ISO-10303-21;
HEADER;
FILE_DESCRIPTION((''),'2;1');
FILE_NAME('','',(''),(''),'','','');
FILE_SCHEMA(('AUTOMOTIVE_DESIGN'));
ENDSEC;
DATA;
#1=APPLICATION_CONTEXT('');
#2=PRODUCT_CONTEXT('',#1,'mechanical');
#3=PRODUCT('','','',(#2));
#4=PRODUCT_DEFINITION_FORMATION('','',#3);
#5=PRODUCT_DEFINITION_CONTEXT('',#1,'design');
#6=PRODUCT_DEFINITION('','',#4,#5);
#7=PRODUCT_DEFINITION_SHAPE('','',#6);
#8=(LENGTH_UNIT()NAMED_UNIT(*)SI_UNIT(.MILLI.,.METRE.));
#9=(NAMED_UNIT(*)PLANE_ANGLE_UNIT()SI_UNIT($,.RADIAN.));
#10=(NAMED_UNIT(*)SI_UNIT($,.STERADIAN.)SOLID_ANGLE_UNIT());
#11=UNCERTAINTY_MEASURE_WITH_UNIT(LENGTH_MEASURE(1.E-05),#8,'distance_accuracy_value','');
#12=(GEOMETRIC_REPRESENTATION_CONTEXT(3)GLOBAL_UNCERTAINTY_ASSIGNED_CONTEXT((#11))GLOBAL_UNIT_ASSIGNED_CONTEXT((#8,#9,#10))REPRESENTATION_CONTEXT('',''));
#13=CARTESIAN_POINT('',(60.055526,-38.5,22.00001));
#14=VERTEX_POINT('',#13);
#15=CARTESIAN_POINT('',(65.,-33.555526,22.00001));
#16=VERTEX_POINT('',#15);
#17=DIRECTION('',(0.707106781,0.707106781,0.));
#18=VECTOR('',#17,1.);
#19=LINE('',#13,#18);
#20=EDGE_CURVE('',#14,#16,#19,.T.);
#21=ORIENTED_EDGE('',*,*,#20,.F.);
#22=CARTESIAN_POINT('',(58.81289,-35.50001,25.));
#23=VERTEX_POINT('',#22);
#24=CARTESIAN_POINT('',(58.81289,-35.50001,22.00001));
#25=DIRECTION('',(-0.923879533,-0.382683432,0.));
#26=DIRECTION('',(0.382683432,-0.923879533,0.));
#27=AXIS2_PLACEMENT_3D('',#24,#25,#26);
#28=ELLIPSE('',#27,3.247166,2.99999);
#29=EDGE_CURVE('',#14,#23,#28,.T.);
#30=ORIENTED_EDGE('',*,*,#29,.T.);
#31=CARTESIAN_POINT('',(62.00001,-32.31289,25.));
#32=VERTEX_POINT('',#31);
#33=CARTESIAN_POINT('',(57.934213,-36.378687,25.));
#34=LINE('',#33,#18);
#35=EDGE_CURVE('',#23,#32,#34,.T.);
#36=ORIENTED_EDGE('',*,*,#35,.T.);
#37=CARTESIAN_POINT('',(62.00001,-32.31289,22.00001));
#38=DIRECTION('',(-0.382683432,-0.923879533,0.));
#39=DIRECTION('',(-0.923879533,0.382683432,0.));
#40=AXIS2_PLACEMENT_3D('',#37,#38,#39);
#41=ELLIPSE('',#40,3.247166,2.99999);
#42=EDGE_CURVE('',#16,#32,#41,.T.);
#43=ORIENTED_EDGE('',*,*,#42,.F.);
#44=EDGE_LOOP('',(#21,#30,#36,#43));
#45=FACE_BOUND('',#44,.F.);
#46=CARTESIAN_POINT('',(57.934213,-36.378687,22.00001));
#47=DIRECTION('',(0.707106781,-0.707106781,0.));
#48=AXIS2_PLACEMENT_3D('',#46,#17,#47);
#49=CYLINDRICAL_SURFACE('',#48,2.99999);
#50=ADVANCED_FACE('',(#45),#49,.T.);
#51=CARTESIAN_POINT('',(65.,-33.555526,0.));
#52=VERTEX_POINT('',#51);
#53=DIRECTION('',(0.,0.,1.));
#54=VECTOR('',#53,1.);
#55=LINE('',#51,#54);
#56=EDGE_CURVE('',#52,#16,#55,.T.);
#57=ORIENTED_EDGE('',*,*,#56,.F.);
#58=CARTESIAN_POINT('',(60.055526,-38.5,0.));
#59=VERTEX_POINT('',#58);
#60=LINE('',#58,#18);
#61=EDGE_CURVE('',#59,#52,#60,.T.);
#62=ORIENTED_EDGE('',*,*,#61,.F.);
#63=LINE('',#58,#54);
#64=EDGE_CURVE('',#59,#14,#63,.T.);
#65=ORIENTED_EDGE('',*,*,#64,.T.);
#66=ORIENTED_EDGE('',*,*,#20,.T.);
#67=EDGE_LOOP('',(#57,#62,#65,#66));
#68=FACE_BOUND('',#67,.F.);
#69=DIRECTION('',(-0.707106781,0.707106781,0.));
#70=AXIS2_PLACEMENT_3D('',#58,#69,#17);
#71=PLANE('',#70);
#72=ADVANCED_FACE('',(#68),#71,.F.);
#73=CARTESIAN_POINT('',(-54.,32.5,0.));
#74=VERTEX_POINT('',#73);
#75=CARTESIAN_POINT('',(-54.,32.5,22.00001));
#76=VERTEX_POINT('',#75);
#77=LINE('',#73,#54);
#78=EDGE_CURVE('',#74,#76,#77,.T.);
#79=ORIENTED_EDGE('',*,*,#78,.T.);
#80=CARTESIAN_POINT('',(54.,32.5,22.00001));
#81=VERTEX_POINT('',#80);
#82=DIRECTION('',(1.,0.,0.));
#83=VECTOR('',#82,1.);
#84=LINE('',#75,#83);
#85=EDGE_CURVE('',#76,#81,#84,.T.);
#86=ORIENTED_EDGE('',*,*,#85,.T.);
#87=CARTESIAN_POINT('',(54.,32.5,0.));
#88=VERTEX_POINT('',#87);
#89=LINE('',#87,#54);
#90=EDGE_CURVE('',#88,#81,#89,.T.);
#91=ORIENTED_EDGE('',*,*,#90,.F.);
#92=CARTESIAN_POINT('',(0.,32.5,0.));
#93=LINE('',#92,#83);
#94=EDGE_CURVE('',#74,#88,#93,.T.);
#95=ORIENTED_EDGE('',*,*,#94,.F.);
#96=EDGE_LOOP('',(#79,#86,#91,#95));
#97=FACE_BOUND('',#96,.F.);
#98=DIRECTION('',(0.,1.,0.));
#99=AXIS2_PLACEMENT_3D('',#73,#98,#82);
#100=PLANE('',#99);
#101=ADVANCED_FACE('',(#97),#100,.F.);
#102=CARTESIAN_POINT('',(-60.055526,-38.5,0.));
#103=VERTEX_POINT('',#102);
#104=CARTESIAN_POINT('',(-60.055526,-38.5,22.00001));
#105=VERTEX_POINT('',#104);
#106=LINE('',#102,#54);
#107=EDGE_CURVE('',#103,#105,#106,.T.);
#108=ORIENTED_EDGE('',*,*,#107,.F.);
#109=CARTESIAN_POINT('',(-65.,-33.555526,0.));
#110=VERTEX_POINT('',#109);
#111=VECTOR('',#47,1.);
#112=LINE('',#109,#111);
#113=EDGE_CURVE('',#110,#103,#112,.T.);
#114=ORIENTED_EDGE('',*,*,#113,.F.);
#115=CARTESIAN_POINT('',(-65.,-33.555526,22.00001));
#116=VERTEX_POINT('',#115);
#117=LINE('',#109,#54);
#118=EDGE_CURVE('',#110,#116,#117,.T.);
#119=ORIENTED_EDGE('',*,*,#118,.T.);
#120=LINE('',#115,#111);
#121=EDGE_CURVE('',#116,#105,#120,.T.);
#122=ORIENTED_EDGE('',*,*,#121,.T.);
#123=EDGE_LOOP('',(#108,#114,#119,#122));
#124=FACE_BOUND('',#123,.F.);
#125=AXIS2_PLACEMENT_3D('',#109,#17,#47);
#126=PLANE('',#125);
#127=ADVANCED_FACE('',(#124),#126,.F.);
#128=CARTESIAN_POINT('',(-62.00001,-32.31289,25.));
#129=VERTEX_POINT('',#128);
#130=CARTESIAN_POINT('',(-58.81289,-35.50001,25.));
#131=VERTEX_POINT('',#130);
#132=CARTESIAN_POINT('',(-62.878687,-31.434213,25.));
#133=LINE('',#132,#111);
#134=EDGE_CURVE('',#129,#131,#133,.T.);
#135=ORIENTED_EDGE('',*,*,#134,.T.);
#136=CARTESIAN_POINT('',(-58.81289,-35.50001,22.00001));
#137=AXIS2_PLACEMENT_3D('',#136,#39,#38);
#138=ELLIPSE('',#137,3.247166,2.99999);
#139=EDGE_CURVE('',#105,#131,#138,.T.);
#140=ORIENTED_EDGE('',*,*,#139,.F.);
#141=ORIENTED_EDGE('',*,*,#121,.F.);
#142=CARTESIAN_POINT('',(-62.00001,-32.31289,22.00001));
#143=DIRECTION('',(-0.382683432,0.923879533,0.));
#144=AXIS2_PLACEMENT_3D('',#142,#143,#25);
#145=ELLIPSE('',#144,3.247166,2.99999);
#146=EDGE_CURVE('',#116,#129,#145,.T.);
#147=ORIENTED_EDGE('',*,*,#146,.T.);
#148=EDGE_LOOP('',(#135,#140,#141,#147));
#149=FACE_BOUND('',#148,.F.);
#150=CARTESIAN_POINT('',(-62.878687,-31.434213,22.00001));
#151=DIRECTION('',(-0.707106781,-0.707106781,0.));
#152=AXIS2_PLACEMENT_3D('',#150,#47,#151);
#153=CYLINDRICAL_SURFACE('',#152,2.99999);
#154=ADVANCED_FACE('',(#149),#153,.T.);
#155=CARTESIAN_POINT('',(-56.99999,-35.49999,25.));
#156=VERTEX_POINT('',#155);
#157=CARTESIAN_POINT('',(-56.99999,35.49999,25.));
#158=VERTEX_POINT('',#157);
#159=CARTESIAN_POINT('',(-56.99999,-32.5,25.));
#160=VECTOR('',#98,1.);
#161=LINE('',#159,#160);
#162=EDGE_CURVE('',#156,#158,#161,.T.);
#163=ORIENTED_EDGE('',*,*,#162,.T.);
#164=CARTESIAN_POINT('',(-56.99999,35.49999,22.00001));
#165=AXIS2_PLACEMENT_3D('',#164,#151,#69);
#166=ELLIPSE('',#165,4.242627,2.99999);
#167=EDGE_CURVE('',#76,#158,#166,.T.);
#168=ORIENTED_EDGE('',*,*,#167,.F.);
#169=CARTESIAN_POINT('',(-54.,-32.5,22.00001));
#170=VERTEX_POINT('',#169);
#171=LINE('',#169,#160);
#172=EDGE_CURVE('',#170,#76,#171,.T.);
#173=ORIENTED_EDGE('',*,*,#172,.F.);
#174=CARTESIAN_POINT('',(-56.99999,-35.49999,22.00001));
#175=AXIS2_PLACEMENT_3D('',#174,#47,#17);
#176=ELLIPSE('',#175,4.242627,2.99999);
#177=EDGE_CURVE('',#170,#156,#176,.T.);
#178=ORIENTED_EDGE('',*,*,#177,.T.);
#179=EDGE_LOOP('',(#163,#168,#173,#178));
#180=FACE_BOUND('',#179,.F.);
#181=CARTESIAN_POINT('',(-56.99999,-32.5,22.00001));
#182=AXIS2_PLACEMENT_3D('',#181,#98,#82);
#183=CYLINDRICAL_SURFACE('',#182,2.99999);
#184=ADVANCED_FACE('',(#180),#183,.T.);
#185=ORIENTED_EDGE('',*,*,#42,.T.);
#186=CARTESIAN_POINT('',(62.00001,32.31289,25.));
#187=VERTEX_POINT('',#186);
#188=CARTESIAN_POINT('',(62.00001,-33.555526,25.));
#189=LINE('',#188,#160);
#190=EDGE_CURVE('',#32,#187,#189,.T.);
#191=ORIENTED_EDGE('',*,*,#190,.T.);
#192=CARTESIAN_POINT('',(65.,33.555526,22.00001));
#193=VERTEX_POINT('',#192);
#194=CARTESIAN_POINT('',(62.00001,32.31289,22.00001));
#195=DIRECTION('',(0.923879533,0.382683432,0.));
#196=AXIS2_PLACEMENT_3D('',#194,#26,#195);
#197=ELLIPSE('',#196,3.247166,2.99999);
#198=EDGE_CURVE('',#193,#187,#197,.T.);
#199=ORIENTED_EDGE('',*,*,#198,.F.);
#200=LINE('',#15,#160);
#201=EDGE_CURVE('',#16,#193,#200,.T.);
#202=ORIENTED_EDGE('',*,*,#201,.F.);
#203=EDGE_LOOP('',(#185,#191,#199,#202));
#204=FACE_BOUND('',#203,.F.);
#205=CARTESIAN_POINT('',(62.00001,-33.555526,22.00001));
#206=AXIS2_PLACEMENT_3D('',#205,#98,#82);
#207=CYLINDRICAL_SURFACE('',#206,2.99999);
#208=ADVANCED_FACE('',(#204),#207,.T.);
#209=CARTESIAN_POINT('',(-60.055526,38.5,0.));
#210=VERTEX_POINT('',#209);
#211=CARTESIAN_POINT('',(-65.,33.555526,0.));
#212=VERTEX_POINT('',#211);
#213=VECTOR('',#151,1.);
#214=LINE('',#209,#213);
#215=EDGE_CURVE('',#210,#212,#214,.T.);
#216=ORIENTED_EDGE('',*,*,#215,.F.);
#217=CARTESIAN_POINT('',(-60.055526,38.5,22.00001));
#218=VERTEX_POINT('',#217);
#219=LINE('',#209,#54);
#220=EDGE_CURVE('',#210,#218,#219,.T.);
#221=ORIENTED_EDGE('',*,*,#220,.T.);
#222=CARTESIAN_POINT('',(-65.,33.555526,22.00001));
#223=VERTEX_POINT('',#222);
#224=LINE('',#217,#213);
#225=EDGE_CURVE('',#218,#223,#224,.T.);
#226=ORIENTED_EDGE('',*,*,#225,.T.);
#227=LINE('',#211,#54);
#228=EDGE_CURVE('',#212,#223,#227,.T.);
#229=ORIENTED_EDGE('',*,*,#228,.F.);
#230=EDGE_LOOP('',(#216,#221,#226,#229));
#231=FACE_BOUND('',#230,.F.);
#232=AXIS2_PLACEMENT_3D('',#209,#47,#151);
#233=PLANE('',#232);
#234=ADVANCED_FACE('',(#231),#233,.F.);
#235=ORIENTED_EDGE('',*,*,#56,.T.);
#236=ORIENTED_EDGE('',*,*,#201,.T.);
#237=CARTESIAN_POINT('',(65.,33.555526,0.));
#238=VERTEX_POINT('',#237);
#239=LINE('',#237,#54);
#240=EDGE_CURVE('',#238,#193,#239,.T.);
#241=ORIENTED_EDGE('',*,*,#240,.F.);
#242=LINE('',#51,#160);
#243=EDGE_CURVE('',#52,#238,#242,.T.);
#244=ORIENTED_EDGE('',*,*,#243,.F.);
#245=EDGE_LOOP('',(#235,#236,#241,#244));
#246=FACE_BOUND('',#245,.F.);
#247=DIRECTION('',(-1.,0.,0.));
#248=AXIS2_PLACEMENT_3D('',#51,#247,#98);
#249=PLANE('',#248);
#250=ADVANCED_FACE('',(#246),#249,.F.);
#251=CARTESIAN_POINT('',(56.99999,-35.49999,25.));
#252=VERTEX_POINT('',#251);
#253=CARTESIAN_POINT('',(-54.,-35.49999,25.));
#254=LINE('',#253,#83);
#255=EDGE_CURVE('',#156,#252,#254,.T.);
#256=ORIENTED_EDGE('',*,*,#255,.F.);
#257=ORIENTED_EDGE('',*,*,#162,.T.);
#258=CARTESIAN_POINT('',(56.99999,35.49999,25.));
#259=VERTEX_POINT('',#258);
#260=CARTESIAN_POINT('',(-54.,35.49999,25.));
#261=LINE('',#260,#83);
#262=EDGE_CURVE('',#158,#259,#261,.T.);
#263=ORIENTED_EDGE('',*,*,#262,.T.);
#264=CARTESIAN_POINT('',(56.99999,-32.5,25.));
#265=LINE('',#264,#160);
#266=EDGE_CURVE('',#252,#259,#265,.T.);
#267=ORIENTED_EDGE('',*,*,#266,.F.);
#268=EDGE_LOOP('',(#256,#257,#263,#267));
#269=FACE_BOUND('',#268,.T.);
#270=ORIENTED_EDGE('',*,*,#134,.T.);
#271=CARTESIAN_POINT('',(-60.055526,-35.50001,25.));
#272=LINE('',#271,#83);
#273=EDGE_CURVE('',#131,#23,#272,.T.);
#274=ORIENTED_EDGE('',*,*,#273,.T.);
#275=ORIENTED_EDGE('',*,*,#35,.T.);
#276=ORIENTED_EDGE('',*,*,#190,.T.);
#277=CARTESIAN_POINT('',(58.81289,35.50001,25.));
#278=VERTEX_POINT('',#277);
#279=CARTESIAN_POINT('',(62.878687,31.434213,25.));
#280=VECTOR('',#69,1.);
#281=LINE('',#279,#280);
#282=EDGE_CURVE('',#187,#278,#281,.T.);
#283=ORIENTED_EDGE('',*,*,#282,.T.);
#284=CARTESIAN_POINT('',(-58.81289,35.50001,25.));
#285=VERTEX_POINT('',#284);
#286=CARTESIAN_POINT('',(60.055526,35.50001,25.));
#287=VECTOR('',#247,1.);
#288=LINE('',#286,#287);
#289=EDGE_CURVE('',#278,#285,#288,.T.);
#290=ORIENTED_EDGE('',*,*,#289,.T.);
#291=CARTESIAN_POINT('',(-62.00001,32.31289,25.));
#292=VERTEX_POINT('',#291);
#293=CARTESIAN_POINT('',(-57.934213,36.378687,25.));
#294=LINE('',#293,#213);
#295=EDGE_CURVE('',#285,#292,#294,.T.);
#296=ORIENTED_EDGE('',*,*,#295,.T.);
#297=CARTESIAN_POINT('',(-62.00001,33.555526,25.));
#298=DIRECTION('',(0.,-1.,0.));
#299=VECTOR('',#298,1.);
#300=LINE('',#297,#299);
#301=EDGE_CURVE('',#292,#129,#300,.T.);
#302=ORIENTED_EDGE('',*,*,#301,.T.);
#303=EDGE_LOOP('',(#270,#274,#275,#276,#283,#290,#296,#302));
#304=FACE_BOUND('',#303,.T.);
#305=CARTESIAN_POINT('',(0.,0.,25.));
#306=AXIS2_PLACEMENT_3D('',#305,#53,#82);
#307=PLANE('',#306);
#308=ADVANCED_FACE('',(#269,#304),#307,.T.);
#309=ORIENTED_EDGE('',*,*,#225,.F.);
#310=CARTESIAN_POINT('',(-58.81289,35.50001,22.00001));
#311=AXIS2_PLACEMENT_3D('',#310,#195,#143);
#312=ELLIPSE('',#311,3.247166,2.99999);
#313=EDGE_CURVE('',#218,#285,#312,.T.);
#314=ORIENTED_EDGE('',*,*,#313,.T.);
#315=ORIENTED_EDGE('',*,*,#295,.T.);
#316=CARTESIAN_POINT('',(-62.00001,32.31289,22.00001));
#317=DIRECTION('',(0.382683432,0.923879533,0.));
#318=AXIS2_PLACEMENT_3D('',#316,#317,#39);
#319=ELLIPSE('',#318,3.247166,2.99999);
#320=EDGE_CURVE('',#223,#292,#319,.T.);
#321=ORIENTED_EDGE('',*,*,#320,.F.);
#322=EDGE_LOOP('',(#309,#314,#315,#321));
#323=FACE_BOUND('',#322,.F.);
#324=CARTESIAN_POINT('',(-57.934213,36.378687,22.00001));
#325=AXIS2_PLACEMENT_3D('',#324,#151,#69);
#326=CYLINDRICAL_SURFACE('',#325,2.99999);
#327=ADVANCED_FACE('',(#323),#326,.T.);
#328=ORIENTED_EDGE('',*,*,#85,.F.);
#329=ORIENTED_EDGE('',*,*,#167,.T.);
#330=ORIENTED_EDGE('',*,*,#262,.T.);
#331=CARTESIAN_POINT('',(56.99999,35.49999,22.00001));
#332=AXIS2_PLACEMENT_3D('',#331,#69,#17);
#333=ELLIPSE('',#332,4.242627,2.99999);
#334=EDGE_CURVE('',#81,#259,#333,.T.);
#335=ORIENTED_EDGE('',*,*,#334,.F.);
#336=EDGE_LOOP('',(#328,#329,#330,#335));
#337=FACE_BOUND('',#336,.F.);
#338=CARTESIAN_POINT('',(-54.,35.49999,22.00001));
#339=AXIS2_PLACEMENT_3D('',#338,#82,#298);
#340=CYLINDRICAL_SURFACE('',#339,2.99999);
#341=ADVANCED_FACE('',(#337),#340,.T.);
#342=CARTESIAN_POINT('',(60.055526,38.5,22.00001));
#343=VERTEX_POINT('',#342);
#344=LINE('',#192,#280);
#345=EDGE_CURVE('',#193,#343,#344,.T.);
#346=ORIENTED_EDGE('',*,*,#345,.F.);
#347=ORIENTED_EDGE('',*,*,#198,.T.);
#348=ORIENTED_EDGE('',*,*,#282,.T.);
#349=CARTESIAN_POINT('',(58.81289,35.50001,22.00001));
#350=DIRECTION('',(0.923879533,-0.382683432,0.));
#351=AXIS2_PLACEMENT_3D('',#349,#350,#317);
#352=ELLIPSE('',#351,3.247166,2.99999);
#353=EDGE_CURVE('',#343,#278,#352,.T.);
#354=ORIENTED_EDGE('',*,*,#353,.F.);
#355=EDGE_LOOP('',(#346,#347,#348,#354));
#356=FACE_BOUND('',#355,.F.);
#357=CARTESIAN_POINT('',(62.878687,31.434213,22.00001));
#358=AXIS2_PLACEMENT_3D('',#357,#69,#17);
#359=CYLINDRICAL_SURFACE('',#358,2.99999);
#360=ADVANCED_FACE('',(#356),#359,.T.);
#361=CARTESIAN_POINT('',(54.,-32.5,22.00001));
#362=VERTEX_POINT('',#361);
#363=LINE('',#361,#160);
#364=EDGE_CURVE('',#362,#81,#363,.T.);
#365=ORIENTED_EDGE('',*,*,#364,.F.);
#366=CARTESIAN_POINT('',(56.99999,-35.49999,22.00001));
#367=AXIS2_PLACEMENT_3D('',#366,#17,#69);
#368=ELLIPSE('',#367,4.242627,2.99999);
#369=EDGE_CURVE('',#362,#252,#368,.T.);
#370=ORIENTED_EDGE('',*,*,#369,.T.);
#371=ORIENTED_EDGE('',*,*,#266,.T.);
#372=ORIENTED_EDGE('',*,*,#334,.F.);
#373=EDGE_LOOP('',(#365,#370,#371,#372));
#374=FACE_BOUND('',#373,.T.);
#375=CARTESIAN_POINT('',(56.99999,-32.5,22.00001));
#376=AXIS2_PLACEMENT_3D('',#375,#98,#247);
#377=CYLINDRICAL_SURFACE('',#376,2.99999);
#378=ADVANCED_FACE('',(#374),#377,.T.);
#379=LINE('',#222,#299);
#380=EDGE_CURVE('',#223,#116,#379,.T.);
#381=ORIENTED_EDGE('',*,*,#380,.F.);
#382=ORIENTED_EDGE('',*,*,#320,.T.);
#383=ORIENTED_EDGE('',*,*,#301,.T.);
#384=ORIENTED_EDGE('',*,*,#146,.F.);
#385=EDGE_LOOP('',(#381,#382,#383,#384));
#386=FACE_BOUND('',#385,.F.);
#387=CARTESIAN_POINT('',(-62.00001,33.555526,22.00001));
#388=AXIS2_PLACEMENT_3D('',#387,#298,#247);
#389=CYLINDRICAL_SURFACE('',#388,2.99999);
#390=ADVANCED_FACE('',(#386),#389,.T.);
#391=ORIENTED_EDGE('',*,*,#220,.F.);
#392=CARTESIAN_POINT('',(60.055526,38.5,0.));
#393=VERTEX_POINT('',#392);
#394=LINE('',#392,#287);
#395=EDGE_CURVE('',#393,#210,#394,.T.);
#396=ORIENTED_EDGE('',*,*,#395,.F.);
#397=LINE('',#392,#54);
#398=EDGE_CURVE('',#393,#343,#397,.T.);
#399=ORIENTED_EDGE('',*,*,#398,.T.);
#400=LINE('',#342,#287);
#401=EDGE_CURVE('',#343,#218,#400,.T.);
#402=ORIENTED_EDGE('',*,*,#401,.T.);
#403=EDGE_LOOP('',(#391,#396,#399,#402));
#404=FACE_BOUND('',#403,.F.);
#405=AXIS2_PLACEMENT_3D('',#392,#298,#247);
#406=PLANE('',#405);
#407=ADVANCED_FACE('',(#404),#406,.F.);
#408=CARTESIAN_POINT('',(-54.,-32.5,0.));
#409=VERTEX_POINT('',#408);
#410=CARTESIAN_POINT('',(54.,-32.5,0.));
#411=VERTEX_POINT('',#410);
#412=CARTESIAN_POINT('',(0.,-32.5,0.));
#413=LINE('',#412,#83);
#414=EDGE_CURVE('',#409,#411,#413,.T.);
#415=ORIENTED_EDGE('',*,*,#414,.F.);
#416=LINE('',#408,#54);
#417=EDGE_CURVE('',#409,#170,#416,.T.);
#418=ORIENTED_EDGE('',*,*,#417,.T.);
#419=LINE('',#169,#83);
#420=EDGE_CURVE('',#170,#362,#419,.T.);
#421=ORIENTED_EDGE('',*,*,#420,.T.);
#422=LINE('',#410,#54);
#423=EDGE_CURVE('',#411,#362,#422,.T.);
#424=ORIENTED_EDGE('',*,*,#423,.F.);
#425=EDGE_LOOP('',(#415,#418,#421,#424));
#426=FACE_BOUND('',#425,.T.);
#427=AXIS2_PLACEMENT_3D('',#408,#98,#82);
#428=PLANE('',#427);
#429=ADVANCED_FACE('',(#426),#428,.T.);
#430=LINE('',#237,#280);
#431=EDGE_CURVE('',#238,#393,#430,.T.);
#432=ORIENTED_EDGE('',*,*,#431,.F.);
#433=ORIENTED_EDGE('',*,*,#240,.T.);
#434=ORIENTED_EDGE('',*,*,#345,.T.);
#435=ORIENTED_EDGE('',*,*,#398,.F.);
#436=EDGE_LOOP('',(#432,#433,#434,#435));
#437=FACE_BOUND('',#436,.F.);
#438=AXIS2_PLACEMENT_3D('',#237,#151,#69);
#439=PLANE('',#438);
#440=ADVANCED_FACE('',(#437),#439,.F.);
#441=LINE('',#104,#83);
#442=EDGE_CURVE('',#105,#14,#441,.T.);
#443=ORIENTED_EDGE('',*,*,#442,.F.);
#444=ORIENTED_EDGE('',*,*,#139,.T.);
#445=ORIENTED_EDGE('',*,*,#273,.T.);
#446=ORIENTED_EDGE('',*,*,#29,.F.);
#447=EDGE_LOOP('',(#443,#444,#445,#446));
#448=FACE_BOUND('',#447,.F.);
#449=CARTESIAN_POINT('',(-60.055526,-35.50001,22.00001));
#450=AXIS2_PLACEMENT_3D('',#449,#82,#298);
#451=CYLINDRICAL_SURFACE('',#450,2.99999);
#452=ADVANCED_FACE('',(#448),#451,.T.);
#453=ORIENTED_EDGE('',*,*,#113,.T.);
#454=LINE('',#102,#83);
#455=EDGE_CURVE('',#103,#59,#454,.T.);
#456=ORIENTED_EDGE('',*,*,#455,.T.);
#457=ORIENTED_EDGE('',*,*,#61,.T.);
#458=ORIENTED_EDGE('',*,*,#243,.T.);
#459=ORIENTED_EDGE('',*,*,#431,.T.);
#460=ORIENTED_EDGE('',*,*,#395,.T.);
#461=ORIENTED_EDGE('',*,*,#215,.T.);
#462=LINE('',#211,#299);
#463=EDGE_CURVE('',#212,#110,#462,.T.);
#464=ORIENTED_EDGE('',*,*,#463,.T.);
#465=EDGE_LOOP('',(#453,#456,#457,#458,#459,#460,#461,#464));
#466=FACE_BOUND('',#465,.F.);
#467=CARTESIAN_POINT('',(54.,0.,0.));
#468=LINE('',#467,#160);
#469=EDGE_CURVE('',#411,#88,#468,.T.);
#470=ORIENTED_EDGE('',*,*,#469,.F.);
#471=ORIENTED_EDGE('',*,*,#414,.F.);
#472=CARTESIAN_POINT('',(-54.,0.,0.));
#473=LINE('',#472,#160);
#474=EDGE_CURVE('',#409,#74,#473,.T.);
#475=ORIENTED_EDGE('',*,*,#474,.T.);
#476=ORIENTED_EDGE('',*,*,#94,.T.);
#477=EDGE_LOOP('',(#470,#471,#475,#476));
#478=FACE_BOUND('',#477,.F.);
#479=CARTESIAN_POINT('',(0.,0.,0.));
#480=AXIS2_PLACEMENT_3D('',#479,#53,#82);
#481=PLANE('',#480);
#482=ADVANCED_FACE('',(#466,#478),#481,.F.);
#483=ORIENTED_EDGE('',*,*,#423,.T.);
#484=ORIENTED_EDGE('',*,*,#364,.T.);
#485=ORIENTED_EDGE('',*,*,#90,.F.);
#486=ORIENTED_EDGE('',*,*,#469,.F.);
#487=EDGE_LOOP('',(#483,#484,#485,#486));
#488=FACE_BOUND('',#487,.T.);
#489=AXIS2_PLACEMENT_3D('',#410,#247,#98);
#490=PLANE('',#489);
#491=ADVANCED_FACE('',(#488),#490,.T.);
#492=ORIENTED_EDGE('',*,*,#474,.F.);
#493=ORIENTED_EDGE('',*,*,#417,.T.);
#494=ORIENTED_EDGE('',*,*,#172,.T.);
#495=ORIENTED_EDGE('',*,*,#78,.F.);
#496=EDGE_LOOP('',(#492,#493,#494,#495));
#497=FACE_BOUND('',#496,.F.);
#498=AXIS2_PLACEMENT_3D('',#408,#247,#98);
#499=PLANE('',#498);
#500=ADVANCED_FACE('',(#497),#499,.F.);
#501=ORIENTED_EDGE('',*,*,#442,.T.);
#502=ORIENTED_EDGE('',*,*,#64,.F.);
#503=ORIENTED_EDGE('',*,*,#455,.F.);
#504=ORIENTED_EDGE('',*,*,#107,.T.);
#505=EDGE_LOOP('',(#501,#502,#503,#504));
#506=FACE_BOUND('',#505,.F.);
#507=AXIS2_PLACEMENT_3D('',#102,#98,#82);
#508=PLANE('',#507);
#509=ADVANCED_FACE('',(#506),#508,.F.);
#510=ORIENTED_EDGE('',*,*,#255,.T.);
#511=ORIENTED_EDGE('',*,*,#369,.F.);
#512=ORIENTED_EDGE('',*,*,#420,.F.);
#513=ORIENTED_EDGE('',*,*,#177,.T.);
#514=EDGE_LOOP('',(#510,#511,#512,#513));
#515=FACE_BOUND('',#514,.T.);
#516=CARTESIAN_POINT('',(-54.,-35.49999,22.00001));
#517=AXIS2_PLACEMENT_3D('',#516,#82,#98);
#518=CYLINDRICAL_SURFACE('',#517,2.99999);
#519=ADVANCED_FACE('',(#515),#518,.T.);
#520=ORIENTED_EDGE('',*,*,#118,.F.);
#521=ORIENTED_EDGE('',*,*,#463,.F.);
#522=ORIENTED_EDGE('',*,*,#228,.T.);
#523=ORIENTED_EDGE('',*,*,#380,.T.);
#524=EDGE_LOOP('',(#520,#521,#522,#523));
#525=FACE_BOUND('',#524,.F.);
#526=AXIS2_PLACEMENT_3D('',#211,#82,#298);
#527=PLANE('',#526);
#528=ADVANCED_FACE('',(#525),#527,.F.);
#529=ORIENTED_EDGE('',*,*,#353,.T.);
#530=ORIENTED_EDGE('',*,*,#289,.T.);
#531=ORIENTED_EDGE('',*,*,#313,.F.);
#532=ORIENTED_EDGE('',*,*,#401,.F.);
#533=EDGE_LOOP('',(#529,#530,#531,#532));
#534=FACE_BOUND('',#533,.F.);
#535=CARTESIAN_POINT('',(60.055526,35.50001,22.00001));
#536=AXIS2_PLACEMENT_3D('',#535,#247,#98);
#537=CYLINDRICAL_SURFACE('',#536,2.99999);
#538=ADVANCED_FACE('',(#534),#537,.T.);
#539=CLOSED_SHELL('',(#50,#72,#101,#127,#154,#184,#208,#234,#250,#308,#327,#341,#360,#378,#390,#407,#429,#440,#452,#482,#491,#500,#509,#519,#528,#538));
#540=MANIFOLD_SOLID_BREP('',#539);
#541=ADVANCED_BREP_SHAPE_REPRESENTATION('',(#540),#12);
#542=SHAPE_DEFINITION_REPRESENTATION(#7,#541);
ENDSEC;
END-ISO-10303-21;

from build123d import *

# Parameters (mm, degrees)
F0_W     = 108
F0_H     = 65
F1_DEPTH = 25
F2_R     = 2.99999


# Not quite as in the source:
# - a fillet or chamfer is up to 0.001 mm smaller than in the source, because OpenCascade refuses the exact size


with BuildPart() as f1:
    # F0 (on Top) → F1 (new body)
    with BuildSketch(Plane.XY):
        Polygon((60.0555262864, 38.5), (-60.0555262864, 38.5), (-65, 33.5555262864), (-65, -33.5555262864), (-60.0555262864, -38.5), (60.0555262864, -38.5), (65, -33.5555262864), (65, 33.5555262864), align=None)
        Rectangle(F0_W, F0_H, mode=Mode.SUBTRACT)
    extrude(amount=F1_DEPTH)

    # F2 (radius 3 in the source; OpenCascade refuses exactly that, so slightly less here)
    f2_edges = [f1.edges().sort_by_distance(p)[0] for p in [
        (65, 0, 25),
        (62.527763, 36.027763, 25),
        (0, 38.5, 25),
        (-62.527763, 36.027763, 25),
        (-65, 0, 25),
        (-62.527763, -36.027763, 25),
        (0, -38.5, 25),
        (62.527763, -36.027763, 25),
        (-54, 0, 25),
        (0, 32.5, 25),
        (54, 0, 25),
        (0, -32.5, 25),
    ]]
    fillet(f2_edges, radius=F2_R)


solid = f1.part
